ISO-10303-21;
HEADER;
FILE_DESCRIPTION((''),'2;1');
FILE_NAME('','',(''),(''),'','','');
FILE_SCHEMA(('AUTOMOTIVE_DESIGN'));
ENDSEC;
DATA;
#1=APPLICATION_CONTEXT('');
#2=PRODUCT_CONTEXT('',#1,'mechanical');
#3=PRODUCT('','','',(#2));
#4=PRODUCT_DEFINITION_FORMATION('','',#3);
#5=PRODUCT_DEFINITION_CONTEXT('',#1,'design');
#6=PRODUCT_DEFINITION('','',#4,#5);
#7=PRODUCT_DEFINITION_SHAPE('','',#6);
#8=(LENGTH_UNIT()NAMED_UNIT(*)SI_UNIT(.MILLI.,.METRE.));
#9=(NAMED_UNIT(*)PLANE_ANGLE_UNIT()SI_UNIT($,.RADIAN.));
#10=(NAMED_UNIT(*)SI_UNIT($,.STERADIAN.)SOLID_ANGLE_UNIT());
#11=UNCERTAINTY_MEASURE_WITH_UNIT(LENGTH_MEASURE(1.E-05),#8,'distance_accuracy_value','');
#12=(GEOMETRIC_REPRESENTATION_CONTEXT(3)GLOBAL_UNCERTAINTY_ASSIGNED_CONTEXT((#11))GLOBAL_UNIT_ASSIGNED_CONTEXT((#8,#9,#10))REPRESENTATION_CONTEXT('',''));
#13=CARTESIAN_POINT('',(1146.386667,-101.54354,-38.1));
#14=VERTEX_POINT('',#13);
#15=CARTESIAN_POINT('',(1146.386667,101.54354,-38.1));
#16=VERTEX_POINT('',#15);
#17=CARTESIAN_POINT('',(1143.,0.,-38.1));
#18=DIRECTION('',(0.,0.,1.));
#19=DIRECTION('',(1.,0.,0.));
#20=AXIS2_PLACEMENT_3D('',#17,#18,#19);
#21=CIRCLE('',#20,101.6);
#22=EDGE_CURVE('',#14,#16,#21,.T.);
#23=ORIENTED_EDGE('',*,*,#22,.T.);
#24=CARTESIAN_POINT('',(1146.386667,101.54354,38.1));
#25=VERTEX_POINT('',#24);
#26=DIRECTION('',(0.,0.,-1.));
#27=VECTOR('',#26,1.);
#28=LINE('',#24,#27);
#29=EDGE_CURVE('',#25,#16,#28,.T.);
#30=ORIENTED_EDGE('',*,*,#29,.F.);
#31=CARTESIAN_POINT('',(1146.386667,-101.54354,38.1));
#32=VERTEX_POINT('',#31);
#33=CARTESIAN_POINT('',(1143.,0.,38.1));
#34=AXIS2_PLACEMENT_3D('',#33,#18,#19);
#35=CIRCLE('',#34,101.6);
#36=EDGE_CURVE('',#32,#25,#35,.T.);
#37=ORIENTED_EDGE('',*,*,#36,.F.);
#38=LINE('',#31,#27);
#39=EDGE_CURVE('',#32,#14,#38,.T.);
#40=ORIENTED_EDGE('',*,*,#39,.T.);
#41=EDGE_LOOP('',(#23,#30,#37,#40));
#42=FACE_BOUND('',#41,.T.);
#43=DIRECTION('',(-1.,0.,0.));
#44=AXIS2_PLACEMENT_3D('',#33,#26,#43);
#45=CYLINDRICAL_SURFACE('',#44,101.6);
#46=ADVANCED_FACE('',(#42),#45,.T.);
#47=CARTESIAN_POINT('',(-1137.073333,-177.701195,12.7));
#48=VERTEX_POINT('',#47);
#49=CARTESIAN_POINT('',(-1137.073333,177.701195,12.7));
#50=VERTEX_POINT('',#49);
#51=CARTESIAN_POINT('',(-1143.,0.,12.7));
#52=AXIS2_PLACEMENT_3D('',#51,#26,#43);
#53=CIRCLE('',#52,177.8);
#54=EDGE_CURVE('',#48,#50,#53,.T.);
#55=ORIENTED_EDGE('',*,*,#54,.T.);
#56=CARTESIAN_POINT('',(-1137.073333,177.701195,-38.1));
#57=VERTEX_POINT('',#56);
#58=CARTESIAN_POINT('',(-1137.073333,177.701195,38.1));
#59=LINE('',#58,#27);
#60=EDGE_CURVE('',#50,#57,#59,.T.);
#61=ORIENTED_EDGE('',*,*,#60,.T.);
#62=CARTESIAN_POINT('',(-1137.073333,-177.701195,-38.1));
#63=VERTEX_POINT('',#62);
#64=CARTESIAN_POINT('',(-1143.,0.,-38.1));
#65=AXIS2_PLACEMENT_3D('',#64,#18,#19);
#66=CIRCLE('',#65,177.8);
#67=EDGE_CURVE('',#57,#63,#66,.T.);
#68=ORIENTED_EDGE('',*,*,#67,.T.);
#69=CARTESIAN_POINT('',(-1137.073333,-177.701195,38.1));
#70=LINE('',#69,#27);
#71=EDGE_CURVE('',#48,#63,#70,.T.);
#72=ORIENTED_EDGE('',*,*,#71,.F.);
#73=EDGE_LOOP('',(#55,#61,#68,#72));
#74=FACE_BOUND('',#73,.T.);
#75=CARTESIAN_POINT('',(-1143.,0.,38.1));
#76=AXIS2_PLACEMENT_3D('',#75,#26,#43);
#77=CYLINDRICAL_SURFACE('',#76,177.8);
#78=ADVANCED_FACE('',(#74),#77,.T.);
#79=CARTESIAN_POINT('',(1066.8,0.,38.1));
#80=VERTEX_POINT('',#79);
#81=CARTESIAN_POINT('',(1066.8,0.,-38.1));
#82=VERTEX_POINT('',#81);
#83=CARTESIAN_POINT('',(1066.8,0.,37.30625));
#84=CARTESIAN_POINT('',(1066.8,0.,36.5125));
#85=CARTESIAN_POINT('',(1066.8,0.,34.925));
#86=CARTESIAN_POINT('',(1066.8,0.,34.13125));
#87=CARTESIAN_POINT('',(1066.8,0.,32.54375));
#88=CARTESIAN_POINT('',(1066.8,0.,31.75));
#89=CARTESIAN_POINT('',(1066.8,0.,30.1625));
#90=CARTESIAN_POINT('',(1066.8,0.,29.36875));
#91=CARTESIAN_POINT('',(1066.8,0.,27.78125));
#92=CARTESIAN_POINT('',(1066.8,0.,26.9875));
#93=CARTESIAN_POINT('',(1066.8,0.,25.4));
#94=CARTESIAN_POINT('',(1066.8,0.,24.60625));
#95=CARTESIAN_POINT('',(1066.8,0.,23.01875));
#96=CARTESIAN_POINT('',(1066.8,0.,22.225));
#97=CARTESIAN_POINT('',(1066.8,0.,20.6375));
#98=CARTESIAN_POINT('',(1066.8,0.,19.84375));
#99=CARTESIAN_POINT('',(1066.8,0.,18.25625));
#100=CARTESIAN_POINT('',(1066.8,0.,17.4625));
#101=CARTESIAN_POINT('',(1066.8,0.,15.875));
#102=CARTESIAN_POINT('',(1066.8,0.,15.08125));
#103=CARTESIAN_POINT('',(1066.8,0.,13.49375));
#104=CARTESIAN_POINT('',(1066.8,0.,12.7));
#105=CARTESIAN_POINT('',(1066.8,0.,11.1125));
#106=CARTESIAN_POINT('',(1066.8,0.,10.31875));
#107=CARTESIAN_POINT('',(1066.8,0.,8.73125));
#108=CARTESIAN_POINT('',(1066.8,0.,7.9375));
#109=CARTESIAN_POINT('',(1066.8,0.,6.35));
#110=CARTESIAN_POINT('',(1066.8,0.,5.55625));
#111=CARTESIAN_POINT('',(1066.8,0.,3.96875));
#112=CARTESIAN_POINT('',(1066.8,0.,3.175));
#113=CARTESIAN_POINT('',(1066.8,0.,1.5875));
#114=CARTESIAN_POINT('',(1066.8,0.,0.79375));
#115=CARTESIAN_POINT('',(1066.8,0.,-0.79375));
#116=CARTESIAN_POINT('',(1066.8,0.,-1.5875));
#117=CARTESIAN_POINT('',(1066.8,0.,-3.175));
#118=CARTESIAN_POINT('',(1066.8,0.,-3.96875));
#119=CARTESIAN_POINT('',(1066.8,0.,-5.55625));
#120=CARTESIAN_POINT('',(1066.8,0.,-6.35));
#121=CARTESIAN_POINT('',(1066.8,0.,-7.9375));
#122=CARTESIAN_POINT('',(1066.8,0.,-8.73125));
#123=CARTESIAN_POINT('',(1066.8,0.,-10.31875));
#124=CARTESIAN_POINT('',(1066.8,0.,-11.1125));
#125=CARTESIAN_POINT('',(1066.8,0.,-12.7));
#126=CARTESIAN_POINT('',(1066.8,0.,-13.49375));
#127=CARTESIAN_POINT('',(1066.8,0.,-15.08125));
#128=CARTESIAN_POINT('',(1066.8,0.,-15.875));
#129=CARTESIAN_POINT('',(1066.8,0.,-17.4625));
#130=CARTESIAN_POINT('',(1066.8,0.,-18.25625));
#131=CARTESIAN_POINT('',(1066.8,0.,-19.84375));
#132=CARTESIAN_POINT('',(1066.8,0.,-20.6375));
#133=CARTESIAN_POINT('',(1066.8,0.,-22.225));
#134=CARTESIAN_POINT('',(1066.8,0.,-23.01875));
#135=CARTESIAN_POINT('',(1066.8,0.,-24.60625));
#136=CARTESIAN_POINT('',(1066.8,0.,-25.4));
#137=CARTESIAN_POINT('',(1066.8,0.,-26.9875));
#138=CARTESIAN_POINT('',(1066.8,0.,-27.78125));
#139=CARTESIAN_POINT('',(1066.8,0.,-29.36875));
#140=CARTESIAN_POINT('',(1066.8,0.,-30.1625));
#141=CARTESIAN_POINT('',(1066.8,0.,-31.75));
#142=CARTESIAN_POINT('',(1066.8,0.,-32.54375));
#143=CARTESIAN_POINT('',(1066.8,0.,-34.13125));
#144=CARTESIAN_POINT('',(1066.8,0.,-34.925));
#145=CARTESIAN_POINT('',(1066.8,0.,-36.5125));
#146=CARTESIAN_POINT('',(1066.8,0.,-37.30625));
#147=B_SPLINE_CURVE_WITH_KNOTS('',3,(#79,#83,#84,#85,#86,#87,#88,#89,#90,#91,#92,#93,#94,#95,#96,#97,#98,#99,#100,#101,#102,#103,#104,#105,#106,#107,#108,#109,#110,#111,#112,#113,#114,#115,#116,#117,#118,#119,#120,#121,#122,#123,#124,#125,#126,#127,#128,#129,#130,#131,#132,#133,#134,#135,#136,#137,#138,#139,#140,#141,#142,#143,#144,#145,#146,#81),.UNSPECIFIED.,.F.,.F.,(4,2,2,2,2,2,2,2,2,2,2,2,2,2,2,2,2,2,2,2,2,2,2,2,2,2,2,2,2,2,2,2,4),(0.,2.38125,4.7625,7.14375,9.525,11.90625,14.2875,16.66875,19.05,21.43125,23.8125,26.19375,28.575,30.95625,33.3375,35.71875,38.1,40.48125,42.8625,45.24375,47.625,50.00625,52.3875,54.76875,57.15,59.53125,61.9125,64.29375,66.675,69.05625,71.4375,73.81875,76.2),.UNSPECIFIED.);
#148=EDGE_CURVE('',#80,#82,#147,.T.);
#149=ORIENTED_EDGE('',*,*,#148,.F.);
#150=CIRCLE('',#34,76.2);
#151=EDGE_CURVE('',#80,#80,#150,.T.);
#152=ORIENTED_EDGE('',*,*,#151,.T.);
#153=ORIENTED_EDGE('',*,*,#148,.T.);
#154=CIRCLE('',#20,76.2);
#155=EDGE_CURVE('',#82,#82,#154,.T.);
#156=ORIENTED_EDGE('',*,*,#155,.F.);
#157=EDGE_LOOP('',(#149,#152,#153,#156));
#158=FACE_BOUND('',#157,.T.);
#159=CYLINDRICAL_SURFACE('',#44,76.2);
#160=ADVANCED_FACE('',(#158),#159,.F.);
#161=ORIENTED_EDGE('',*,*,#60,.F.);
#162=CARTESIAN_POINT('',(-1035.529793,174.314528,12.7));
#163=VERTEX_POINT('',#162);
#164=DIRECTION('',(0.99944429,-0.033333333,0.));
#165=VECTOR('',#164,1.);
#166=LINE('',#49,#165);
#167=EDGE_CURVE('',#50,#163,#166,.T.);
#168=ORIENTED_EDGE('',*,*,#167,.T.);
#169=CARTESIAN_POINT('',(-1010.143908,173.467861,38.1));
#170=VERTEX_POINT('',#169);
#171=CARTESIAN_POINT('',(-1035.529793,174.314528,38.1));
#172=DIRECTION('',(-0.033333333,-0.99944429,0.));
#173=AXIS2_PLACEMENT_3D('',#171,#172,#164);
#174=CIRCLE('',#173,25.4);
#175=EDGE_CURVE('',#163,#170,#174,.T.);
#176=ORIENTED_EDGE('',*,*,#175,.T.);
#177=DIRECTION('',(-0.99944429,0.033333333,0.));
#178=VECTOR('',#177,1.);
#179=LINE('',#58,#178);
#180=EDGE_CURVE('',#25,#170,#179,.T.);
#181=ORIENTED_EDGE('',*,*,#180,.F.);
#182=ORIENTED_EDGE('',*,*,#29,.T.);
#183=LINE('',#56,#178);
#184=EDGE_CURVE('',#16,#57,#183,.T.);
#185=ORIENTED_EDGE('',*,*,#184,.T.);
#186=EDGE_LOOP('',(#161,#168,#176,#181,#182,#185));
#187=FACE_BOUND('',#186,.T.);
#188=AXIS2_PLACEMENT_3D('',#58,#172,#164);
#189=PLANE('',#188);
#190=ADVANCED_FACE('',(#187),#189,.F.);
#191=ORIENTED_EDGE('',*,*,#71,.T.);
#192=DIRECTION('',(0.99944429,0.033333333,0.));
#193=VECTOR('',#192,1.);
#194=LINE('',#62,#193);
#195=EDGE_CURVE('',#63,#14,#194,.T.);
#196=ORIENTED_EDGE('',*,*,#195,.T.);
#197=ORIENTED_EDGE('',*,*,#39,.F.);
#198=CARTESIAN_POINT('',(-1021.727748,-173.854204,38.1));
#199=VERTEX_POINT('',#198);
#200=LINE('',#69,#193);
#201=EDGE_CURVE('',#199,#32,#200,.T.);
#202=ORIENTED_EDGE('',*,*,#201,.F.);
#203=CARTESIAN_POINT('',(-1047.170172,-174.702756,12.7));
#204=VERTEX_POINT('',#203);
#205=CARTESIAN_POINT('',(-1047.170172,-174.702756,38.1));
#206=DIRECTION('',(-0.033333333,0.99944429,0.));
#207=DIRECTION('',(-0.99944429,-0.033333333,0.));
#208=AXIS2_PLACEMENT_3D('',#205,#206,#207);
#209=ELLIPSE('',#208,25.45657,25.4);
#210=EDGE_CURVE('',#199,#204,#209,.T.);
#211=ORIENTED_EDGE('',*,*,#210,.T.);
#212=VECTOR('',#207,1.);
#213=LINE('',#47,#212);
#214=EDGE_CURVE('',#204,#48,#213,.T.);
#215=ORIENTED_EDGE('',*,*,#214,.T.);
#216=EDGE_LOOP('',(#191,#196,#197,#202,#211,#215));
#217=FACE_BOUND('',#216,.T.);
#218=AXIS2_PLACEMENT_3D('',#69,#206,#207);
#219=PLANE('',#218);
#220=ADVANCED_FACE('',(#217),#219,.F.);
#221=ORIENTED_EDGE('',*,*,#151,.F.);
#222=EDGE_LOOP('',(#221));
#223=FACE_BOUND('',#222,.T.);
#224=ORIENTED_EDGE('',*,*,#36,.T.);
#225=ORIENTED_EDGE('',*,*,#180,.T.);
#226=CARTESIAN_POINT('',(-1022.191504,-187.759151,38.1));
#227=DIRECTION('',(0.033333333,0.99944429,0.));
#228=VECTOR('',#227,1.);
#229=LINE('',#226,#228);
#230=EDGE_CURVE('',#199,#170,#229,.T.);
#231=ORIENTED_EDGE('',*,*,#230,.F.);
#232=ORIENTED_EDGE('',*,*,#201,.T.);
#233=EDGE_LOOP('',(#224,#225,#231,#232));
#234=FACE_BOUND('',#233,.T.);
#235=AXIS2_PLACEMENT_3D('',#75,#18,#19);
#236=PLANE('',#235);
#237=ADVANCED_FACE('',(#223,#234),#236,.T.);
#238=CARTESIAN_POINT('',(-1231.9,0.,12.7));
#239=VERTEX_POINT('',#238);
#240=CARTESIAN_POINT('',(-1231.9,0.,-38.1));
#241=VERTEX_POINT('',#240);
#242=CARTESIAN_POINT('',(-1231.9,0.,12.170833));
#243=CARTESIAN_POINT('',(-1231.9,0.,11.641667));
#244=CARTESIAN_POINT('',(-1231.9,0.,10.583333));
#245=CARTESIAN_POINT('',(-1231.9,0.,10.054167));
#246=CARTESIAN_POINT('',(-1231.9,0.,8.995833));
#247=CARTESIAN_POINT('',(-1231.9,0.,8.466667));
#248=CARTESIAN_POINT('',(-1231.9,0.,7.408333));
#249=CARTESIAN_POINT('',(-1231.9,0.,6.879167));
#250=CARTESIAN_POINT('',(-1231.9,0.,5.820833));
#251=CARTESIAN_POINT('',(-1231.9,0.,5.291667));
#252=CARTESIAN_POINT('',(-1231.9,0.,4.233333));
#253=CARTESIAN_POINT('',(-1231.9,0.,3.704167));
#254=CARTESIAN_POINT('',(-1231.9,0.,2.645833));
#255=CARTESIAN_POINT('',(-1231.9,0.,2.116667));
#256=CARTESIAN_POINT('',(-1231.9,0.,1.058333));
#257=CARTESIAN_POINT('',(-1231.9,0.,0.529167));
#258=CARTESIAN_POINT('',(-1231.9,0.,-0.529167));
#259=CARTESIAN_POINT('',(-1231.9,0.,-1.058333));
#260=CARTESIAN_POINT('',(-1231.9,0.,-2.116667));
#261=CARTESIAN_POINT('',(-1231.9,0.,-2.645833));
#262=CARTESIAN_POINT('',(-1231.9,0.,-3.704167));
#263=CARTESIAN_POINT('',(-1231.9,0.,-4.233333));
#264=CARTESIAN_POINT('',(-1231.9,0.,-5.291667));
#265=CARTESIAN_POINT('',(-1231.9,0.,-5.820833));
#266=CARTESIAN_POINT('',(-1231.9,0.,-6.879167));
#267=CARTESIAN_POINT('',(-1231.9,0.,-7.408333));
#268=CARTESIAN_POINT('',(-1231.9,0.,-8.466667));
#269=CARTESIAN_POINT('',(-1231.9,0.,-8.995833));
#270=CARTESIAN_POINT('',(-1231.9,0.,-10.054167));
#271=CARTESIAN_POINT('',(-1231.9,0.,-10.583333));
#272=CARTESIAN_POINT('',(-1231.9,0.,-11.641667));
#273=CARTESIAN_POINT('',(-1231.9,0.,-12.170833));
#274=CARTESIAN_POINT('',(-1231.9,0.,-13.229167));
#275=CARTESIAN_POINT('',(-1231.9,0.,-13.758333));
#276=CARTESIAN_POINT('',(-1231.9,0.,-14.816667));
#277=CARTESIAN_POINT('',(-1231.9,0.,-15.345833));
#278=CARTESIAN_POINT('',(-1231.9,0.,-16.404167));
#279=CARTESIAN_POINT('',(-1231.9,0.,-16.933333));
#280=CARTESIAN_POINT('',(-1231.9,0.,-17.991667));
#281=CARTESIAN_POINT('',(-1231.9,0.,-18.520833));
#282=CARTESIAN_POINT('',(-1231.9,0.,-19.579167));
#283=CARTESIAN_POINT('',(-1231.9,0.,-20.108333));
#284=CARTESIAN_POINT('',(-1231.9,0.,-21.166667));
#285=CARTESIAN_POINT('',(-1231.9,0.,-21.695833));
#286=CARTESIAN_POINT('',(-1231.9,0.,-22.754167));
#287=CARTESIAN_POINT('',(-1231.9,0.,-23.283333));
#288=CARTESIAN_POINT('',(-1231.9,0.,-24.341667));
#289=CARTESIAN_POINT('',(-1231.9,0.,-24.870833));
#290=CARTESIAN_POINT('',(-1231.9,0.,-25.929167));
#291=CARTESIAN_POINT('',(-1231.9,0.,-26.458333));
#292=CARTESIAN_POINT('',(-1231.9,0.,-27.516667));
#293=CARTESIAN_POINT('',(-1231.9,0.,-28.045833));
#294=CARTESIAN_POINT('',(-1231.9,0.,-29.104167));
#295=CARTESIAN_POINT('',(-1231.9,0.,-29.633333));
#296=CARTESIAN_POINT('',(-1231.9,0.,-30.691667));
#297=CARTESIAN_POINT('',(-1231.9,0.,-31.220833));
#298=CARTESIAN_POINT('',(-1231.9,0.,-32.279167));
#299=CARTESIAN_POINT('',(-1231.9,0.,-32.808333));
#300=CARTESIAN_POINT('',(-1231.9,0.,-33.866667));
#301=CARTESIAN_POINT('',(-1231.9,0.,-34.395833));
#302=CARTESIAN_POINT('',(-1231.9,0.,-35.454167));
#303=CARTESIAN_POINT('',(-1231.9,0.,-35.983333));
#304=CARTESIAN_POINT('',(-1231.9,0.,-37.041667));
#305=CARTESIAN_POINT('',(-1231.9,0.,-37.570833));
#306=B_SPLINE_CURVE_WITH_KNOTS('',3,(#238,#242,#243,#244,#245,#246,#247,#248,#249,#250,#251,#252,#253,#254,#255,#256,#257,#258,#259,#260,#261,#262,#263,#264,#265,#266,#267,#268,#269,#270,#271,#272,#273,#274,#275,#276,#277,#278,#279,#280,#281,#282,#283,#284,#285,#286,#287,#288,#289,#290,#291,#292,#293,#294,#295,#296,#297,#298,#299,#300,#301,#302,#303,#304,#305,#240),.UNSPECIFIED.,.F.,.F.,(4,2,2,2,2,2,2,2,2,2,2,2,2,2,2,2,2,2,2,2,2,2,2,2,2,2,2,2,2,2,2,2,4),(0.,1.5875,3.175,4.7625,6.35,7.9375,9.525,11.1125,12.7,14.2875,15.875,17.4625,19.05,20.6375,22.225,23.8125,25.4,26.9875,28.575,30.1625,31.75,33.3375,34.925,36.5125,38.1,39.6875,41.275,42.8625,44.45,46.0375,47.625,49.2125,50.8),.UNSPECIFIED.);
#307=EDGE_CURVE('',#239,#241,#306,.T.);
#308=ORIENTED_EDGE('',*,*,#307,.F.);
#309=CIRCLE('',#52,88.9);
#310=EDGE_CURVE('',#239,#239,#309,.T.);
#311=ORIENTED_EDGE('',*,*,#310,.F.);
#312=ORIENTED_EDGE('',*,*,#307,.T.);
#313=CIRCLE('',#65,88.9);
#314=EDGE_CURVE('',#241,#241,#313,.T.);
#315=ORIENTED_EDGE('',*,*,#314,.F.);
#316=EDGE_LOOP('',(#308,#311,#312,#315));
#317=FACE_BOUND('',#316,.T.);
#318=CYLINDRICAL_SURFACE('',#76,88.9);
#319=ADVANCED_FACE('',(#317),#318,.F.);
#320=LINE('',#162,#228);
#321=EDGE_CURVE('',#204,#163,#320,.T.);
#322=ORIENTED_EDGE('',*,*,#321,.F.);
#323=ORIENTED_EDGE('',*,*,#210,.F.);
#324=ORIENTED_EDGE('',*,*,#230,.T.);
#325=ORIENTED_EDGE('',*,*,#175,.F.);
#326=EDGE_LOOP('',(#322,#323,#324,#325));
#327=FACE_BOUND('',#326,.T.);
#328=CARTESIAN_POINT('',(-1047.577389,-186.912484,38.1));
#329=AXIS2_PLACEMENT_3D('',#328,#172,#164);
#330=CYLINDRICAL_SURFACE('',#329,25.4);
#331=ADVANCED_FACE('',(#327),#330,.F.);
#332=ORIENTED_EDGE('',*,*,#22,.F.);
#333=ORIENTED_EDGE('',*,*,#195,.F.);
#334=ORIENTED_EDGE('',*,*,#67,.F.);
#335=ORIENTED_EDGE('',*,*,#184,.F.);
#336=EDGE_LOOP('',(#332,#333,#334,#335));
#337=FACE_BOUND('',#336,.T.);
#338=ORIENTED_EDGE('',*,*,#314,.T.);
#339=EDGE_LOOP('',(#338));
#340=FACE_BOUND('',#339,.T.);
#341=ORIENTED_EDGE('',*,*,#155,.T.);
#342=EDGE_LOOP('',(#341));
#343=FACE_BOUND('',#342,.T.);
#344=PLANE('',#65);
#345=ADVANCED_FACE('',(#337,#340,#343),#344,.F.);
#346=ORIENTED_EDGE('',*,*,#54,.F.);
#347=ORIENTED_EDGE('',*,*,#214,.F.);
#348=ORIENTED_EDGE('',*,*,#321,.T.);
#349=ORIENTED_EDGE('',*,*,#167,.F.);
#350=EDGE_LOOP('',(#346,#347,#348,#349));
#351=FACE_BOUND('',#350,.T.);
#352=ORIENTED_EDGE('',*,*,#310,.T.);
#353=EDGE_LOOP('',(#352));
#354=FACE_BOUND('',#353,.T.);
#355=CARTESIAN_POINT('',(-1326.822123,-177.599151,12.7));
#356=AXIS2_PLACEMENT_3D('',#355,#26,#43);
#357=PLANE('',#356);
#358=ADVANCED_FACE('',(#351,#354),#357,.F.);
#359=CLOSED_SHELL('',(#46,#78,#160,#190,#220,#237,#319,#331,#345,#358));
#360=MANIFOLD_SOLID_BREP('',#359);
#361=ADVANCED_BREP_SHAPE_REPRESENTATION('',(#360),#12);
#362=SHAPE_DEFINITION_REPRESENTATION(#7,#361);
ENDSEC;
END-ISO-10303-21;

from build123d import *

# Parameters (mm, degrees)
SKETCH1_R               = 88.9
SKETCH1_R_2             = 76.2
BOSS_EXTRUDE1_DEPTH     = 38.1
CUT_EXTRUDE1_DEPTH      = 1364.467617688
CUT_EXTRUDE1_DEPTH_BACK = 1364.467617688
SKETCH2_W               = 304.8
SKETCH2_H               = 25.4
FILLET1_R               = 25.4


with BuildPart() as part:
    # Sketch1 → Boss-Extrude1 (new, symmetric)
    with BuildSketch(Plane.XY):
        with BuildLine():
            Line((-1137.073333333, 177.701194769), (1146.386666667, 101.543539868))
            ThreePointArc((1146.386666667, 101.543539868), (1244.6, 0), (1146.386666667, -101.543539868))
            Line((1146.386666667, -101.543539868), (-1137.073333333, -177.701194769))
            ThreePointArc((-1137.073333333, -177.701194769), (-1320.8, 0), (-1137.073333333, 177.701194769))
        make_face()
        with Locations(Location((-1143, 0, 0), (0, 0, 180))):
            Circle(SKETCH1_R, mode=Mode.SUBTRACT)
        with Locations(Location((1143, 0, 0), (0, 0, 180))):
            Circle(SKETCH1_R_2, mode=Mode.SUBTRACT)
    extrude(amount=BOSS_EXTRUDE1_DEPTH, both=True)

    # Sketch2 → Cut-Extrude1 (cut, two sides: drawn at the far end of the back side and taken through both)
    with BuildSketch(Plane(origin=(4.656666667, 139.622367318, 0), x_dir=(0.9994442900376634, -0.03333333333333318, 0), z_dir=(0.03333333333333318, 0.9994442900376634, 0)).offset(-CUT_EXTRUDE1_DEPTH_BACK)):
        with Locations((-1167.764823513, -25.4)):
            Rectangle(SKETCH2_W, SKETCH2_H)
    extrude(amount=CUT_EXTRUDE1_DEPTH + CUT_EXTRUDE1_DEPTH_BACK, mode=Mode.SUBTRACT)

    # Fillet1
    fillet1_edges = [part.edges().sort_by_distance(p)[0] for p in [
        (-1015.935828218, -0.193171338, 12.7),
    ]]
    fillet(fillet1_edges, radius=FILLET1_R - 0.0001)  # a hair under: the kernel refuses the full size


solid = part.part
